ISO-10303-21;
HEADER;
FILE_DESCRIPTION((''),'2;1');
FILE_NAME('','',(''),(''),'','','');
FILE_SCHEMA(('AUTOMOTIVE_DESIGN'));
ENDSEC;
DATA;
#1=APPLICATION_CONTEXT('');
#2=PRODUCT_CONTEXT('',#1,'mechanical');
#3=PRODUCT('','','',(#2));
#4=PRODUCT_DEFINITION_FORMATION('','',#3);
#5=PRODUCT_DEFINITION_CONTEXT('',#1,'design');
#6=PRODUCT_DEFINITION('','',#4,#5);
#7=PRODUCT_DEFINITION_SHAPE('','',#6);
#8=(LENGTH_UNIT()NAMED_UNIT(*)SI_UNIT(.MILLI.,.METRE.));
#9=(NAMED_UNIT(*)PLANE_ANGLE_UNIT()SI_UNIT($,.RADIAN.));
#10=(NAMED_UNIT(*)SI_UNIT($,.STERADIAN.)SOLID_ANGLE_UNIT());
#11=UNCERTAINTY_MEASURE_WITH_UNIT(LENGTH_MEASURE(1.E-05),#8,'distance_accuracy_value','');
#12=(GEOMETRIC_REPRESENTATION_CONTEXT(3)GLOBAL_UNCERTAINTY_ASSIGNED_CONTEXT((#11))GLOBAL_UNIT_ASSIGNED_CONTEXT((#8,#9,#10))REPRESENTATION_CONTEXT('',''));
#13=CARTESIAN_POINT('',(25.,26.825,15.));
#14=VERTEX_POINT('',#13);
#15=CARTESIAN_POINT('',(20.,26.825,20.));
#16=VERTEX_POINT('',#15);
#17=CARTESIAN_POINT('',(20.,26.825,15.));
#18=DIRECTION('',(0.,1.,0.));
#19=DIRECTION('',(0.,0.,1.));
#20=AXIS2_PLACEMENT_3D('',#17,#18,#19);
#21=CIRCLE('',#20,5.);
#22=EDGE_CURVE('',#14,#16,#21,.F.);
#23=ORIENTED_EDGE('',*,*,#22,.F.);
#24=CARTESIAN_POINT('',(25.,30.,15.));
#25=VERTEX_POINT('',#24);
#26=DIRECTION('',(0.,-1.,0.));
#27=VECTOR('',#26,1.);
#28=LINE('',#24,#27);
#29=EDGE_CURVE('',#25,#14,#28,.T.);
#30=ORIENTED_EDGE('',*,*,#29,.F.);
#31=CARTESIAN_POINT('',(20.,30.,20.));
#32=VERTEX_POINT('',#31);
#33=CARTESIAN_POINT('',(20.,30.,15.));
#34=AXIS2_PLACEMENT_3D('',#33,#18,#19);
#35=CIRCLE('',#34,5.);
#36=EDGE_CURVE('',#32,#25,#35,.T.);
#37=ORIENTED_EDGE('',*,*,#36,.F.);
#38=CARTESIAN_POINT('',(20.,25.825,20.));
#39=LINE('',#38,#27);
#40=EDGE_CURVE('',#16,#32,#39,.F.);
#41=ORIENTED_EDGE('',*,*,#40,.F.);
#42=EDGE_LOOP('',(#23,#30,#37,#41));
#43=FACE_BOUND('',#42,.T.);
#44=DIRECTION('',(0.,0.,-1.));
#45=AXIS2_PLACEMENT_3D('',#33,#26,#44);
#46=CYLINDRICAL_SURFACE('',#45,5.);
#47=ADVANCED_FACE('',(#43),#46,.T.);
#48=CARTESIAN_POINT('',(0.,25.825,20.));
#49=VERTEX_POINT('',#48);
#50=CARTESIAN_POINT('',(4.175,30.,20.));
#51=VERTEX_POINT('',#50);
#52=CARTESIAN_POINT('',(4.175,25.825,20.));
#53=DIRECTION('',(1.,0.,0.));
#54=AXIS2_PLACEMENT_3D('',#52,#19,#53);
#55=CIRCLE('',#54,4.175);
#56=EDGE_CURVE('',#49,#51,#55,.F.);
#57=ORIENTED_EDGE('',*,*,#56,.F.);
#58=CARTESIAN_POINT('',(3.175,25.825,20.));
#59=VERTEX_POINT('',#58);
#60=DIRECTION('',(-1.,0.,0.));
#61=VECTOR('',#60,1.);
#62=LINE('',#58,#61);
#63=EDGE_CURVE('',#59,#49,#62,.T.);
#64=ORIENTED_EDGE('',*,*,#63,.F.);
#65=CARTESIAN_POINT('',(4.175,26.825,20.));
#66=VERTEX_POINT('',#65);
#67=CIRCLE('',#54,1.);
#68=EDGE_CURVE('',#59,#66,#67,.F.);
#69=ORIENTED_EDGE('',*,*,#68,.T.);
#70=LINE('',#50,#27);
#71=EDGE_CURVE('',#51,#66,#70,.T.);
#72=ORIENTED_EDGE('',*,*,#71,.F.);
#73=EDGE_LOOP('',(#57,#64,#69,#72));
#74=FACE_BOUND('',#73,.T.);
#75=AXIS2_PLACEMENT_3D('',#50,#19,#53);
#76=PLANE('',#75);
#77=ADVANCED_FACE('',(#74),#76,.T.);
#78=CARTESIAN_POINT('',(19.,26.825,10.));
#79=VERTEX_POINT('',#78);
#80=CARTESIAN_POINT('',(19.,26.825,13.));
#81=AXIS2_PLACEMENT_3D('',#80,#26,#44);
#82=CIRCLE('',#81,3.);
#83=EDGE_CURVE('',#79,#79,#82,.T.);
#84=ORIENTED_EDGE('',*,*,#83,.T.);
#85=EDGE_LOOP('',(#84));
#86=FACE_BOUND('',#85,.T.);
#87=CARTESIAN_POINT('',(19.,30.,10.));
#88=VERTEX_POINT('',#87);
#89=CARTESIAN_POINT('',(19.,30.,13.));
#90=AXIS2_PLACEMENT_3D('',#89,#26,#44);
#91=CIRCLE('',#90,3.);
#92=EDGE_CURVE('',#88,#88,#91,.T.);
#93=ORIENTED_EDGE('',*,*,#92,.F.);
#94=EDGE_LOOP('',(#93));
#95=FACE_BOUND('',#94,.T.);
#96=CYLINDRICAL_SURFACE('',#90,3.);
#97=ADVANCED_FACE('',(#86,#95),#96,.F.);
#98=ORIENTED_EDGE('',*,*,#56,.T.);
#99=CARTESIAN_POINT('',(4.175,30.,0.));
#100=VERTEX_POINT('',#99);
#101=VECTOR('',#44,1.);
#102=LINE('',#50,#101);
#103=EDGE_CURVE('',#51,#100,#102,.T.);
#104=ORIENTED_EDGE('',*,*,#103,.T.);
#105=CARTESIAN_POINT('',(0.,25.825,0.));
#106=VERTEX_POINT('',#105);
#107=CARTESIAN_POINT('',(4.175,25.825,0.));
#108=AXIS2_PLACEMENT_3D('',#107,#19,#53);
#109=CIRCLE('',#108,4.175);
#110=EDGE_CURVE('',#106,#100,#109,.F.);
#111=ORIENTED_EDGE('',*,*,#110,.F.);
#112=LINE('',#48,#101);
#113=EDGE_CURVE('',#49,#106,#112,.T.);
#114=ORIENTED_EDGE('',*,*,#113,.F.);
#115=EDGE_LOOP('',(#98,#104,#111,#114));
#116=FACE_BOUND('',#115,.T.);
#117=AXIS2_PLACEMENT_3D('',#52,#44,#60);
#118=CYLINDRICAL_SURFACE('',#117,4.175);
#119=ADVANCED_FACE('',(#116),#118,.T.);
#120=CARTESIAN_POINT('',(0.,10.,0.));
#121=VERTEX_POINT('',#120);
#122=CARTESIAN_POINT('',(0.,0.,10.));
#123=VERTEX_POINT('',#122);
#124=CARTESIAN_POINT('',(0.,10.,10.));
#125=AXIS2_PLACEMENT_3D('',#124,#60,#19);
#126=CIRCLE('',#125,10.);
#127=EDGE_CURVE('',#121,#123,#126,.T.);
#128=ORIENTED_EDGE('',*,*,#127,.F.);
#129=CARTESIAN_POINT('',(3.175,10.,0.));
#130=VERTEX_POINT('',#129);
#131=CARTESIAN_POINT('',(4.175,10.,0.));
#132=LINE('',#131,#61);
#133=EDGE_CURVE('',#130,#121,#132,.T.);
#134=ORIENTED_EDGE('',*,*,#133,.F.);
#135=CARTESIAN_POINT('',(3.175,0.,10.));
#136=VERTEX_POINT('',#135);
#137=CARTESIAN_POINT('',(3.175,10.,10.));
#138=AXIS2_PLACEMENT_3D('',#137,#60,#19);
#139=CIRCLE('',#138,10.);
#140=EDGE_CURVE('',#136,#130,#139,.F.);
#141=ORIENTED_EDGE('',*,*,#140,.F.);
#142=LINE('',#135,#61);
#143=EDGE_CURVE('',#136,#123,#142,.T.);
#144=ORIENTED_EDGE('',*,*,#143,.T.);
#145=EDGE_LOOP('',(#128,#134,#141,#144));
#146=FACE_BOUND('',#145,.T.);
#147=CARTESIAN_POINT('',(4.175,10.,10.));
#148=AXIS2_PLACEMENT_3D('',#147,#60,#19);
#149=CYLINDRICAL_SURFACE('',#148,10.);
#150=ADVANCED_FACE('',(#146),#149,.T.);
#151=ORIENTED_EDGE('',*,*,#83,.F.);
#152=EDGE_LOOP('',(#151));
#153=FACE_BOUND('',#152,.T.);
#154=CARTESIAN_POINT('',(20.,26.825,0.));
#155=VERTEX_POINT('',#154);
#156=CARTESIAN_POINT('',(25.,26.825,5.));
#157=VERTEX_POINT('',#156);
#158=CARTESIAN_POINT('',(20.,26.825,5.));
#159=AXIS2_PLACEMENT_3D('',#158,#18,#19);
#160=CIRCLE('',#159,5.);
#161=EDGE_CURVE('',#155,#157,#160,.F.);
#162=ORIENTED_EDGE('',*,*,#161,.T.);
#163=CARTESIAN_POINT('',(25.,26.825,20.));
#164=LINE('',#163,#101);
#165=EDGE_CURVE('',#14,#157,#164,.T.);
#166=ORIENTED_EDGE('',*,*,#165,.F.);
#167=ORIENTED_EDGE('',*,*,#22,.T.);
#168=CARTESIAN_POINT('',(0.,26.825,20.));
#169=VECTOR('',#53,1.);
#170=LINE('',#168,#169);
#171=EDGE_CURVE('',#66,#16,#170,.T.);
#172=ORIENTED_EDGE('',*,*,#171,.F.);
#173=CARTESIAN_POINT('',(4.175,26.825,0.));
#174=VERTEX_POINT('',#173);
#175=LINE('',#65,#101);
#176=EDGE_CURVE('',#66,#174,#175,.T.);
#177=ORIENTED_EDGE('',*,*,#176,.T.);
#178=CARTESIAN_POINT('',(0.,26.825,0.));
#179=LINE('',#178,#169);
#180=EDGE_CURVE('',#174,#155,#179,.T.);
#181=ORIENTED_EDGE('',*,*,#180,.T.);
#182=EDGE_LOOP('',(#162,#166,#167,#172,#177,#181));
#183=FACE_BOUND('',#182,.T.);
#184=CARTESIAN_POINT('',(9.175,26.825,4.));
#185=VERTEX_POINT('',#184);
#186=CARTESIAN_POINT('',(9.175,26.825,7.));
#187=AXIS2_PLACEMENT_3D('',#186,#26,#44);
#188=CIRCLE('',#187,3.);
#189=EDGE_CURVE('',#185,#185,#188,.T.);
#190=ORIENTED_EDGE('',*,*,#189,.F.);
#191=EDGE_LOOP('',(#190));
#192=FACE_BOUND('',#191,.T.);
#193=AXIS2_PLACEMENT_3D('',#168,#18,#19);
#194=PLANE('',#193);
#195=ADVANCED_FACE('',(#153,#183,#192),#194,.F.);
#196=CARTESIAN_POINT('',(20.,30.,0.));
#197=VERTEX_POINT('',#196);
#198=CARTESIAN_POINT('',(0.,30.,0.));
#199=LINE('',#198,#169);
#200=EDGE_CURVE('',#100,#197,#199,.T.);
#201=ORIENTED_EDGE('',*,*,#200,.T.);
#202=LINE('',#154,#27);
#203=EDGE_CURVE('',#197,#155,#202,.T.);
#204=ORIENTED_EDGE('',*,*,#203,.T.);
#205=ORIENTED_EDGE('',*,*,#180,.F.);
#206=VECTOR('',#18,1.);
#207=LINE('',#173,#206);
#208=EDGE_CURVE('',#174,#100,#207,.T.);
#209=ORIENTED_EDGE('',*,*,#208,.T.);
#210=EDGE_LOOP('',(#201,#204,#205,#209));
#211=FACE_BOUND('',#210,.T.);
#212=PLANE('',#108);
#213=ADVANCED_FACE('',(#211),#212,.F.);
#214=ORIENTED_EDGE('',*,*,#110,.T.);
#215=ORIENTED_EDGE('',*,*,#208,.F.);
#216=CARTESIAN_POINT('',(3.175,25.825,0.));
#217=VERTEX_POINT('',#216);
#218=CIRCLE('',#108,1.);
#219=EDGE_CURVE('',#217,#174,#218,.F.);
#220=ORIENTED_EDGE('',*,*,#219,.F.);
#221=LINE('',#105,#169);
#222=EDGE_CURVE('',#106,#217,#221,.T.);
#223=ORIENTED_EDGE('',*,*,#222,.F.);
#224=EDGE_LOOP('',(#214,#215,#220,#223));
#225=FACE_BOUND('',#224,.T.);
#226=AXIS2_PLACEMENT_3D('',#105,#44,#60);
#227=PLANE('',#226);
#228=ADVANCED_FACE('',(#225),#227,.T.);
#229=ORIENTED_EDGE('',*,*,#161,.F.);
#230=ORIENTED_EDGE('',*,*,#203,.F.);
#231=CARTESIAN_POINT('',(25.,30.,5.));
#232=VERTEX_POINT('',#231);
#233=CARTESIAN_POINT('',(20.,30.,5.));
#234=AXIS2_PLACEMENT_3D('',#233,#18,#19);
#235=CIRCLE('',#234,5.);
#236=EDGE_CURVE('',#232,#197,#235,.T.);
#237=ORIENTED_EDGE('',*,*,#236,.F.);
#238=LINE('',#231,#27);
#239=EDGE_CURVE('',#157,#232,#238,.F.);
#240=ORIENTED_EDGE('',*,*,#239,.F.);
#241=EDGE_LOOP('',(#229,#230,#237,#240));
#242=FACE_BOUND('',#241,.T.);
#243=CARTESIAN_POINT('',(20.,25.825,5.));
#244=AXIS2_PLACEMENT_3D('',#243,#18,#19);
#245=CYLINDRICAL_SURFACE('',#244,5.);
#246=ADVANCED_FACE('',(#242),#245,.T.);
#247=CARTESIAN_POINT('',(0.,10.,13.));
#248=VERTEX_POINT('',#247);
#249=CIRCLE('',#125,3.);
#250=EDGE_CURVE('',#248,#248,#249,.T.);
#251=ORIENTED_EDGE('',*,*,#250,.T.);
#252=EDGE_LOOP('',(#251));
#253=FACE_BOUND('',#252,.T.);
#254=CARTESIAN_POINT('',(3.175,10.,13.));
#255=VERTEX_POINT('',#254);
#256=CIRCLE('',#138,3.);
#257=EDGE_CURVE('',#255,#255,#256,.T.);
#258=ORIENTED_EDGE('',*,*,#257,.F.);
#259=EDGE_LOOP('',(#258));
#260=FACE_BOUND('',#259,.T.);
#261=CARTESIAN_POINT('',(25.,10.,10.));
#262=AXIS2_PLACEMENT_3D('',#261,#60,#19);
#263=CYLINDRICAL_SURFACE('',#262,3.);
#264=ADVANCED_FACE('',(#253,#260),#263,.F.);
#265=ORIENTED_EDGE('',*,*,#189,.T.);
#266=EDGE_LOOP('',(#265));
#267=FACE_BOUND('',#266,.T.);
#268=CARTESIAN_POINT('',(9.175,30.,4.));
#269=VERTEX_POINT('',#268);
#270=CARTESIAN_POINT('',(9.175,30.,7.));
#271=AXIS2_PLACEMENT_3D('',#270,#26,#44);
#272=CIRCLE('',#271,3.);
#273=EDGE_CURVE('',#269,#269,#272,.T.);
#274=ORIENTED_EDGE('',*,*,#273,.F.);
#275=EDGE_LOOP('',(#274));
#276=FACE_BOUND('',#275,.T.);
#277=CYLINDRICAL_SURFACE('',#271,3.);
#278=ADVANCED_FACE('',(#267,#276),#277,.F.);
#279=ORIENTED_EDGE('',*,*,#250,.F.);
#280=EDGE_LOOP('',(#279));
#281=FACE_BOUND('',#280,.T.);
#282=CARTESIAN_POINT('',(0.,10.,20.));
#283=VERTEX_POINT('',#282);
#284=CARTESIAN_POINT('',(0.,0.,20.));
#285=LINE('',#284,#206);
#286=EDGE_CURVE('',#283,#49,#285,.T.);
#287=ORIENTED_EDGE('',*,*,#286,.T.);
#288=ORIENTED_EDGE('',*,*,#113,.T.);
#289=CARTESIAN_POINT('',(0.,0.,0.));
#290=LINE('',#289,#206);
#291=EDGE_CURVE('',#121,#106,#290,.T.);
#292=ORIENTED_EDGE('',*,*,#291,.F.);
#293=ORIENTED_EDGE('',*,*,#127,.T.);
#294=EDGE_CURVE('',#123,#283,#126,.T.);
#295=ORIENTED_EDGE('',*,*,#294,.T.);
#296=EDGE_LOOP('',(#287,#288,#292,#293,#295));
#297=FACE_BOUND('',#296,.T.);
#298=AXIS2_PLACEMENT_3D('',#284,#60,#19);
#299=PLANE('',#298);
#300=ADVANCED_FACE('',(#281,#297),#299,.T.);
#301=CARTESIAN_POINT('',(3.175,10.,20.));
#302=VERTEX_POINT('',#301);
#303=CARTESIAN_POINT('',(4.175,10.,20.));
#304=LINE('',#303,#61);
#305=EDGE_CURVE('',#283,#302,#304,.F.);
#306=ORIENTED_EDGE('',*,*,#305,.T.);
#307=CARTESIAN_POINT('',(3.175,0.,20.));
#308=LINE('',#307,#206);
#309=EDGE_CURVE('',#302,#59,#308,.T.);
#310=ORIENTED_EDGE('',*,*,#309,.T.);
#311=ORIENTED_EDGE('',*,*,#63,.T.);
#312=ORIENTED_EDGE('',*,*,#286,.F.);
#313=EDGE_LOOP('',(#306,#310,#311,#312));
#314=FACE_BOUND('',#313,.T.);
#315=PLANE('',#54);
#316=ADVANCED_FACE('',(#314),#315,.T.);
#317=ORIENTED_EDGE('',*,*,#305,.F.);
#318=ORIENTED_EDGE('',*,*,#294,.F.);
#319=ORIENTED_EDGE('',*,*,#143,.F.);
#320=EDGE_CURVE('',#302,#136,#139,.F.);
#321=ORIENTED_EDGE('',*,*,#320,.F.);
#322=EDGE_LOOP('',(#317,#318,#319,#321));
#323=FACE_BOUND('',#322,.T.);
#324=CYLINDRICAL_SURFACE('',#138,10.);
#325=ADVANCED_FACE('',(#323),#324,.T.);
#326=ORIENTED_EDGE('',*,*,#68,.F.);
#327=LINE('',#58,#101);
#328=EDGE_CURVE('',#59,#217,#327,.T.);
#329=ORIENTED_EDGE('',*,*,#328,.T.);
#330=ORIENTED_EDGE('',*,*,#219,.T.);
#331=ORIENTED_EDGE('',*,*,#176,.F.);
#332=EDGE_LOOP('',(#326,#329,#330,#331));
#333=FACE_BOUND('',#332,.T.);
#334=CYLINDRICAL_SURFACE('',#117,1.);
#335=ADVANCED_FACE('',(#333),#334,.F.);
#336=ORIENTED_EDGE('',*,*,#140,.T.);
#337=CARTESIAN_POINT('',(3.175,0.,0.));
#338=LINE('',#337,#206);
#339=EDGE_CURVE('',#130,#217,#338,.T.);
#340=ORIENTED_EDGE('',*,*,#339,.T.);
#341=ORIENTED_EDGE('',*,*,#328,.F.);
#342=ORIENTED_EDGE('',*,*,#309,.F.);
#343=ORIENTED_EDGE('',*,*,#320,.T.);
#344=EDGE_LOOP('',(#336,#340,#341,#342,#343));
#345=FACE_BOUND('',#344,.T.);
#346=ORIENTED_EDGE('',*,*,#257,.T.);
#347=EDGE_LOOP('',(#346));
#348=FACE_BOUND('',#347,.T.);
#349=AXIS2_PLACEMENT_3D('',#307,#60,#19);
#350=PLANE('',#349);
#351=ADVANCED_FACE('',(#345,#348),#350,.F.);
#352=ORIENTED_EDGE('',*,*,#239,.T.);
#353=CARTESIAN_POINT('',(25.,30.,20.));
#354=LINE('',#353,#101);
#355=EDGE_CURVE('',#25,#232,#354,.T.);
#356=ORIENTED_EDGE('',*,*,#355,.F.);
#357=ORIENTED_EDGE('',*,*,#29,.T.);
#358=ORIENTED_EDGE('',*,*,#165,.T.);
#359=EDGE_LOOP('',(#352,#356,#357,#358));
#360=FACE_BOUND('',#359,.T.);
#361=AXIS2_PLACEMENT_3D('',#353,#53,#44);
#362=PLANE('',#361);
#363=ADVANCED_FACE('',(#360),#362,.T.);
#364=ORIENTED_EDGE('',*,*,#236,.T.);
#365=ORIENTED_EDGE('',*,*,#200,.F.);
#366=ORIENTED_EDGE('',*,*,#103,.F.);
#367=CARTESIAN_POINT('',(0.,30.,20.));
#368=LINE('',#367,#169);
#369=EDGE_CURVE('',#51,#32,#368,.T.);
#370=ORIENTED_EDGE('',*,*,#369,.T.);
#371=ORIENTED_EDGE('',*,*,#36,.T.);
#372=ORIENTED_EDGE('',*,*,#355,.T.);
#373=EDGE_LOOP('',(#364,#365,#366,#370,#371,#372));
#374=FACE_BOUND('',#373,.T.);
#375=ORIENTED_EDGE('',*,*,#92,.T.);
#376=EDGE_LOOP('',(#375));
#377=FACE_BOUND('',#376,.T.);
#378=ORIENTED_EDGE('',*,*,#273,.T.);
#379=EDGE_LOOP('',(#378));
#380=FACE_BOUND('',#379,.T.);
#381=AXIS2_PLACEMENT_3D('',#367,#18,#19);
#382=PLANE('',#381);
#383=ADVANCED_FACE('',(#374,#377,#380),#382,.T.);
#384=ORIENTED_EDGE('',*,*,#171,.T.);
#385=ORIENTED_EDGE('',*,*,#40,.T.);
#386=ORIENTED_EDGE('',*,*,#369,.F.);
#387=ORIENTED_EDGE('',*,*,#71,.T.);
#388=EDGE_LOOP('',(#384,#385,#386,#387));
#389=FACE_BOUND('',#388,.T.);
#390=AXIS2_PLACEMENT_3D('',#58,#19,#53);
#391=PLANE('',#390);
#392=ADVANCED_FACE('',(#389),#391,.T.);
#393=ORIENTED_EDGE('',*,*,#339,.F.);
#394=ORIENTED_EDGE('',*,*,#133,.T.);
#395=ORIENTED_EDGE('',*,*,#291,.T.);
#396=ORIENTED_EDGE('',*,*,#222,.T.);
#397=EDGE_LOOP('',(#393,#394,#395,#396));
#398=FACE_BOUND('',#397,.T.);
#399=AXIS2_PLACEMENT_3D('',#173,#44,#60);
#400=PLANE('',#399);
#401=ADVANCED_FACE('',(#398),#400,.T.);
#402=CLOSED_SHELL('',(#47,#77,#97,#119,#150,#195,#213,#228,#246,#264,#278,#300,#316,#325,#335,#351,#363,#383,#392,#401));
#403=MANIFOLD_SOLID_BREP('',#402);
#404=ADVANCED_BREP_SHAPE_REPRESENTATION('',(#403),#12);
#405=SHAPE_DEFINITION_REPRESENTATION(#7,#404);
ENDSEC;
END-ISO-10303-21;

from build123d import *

# Parameters (mm, degrees)
BASE_FLANGE1_DEPTH = 20
SKETCH6_R          = 3
CUT_EXTRUDE1_DEPTH = 44.874821937
FILLET1_R          = 10
FILLET2_R          = 5
SKETCH7_R          = 3
CUT_EXTRUDE2_DEPTH = 42.768177181


# Read off the part's stored shape, not the designer's step: Base-Flange1
with BuildPart() as part:
    # Base-Flange1 outline → Base-Flange1 (new body)
    with BuildSketch(Plane.XY):
        with BuildLine():
            Line((4.175, 26.825), (25, 26.825))
            Line((25, 26.825), (25, 30))
            Line((25, 30), (4.175, 30))
            ThreePointArc((4.175, 30), (1.222829189, 28.777170811), (0, 25.825))
            Line((0, 25.825), (0, 0))
            Line((0, 0), (3.175, 0))
            Line((3.175, 0), (3.175, 25.825))
            ThreePointArc((3.175, 25.825), (3.467893219, 26.532106781), (4.175, 26.825))
        make_face()
    extrude(amount=BASE_FLANGE1_DEPTH)

    # Sketch6 → Cut-Extrude1 (cut, through all)
    with BuildSketch(Plane.ZY):
        with Locations((10, 10)):
            Circle(SKETCH6_R)
    extrude(amount=-CUT_EXTRUDE1_DEPTH, mode=Mode.SUBTRACT)

    # Fillet1
    fillet1_edges = [part.edges().sort_by_distance(p)[0] for p in [
        (1.5875, 0, 0),
        (1.5875, 0, 20),
    ]]
    fillet(fillet1_edges, radius=FILLET1_R - 0.0001)  # a hair under: the kernel refuses the full size

    # Fillet2
    fillet2_edges = [part.edges().sort_by_distance(p)[0] for p in [
        (25, 28.4125, 20),
        (25, 28.4125, 0),
    ]]
    fillet(fillet2_edges, radius=FILLET2_R)

    # Sketch7 → Cut-Extrude2 (cut, through all)
    with BuildSketch(Plane.XZ.offset(-26.825)):
        with Locations(Location((9.175, 7, 0), (0, 0, 270))):
            Circle(SKETCH7_R)
        with Locations(Location((19, 13, 0), (0, 0, 270))):
            Circle(SKETCH7_R)
    extrude(amount=-CUT_EXTRUDE2_DEPTH, mode=Mode.SUBTRACT)


solid = part.part
